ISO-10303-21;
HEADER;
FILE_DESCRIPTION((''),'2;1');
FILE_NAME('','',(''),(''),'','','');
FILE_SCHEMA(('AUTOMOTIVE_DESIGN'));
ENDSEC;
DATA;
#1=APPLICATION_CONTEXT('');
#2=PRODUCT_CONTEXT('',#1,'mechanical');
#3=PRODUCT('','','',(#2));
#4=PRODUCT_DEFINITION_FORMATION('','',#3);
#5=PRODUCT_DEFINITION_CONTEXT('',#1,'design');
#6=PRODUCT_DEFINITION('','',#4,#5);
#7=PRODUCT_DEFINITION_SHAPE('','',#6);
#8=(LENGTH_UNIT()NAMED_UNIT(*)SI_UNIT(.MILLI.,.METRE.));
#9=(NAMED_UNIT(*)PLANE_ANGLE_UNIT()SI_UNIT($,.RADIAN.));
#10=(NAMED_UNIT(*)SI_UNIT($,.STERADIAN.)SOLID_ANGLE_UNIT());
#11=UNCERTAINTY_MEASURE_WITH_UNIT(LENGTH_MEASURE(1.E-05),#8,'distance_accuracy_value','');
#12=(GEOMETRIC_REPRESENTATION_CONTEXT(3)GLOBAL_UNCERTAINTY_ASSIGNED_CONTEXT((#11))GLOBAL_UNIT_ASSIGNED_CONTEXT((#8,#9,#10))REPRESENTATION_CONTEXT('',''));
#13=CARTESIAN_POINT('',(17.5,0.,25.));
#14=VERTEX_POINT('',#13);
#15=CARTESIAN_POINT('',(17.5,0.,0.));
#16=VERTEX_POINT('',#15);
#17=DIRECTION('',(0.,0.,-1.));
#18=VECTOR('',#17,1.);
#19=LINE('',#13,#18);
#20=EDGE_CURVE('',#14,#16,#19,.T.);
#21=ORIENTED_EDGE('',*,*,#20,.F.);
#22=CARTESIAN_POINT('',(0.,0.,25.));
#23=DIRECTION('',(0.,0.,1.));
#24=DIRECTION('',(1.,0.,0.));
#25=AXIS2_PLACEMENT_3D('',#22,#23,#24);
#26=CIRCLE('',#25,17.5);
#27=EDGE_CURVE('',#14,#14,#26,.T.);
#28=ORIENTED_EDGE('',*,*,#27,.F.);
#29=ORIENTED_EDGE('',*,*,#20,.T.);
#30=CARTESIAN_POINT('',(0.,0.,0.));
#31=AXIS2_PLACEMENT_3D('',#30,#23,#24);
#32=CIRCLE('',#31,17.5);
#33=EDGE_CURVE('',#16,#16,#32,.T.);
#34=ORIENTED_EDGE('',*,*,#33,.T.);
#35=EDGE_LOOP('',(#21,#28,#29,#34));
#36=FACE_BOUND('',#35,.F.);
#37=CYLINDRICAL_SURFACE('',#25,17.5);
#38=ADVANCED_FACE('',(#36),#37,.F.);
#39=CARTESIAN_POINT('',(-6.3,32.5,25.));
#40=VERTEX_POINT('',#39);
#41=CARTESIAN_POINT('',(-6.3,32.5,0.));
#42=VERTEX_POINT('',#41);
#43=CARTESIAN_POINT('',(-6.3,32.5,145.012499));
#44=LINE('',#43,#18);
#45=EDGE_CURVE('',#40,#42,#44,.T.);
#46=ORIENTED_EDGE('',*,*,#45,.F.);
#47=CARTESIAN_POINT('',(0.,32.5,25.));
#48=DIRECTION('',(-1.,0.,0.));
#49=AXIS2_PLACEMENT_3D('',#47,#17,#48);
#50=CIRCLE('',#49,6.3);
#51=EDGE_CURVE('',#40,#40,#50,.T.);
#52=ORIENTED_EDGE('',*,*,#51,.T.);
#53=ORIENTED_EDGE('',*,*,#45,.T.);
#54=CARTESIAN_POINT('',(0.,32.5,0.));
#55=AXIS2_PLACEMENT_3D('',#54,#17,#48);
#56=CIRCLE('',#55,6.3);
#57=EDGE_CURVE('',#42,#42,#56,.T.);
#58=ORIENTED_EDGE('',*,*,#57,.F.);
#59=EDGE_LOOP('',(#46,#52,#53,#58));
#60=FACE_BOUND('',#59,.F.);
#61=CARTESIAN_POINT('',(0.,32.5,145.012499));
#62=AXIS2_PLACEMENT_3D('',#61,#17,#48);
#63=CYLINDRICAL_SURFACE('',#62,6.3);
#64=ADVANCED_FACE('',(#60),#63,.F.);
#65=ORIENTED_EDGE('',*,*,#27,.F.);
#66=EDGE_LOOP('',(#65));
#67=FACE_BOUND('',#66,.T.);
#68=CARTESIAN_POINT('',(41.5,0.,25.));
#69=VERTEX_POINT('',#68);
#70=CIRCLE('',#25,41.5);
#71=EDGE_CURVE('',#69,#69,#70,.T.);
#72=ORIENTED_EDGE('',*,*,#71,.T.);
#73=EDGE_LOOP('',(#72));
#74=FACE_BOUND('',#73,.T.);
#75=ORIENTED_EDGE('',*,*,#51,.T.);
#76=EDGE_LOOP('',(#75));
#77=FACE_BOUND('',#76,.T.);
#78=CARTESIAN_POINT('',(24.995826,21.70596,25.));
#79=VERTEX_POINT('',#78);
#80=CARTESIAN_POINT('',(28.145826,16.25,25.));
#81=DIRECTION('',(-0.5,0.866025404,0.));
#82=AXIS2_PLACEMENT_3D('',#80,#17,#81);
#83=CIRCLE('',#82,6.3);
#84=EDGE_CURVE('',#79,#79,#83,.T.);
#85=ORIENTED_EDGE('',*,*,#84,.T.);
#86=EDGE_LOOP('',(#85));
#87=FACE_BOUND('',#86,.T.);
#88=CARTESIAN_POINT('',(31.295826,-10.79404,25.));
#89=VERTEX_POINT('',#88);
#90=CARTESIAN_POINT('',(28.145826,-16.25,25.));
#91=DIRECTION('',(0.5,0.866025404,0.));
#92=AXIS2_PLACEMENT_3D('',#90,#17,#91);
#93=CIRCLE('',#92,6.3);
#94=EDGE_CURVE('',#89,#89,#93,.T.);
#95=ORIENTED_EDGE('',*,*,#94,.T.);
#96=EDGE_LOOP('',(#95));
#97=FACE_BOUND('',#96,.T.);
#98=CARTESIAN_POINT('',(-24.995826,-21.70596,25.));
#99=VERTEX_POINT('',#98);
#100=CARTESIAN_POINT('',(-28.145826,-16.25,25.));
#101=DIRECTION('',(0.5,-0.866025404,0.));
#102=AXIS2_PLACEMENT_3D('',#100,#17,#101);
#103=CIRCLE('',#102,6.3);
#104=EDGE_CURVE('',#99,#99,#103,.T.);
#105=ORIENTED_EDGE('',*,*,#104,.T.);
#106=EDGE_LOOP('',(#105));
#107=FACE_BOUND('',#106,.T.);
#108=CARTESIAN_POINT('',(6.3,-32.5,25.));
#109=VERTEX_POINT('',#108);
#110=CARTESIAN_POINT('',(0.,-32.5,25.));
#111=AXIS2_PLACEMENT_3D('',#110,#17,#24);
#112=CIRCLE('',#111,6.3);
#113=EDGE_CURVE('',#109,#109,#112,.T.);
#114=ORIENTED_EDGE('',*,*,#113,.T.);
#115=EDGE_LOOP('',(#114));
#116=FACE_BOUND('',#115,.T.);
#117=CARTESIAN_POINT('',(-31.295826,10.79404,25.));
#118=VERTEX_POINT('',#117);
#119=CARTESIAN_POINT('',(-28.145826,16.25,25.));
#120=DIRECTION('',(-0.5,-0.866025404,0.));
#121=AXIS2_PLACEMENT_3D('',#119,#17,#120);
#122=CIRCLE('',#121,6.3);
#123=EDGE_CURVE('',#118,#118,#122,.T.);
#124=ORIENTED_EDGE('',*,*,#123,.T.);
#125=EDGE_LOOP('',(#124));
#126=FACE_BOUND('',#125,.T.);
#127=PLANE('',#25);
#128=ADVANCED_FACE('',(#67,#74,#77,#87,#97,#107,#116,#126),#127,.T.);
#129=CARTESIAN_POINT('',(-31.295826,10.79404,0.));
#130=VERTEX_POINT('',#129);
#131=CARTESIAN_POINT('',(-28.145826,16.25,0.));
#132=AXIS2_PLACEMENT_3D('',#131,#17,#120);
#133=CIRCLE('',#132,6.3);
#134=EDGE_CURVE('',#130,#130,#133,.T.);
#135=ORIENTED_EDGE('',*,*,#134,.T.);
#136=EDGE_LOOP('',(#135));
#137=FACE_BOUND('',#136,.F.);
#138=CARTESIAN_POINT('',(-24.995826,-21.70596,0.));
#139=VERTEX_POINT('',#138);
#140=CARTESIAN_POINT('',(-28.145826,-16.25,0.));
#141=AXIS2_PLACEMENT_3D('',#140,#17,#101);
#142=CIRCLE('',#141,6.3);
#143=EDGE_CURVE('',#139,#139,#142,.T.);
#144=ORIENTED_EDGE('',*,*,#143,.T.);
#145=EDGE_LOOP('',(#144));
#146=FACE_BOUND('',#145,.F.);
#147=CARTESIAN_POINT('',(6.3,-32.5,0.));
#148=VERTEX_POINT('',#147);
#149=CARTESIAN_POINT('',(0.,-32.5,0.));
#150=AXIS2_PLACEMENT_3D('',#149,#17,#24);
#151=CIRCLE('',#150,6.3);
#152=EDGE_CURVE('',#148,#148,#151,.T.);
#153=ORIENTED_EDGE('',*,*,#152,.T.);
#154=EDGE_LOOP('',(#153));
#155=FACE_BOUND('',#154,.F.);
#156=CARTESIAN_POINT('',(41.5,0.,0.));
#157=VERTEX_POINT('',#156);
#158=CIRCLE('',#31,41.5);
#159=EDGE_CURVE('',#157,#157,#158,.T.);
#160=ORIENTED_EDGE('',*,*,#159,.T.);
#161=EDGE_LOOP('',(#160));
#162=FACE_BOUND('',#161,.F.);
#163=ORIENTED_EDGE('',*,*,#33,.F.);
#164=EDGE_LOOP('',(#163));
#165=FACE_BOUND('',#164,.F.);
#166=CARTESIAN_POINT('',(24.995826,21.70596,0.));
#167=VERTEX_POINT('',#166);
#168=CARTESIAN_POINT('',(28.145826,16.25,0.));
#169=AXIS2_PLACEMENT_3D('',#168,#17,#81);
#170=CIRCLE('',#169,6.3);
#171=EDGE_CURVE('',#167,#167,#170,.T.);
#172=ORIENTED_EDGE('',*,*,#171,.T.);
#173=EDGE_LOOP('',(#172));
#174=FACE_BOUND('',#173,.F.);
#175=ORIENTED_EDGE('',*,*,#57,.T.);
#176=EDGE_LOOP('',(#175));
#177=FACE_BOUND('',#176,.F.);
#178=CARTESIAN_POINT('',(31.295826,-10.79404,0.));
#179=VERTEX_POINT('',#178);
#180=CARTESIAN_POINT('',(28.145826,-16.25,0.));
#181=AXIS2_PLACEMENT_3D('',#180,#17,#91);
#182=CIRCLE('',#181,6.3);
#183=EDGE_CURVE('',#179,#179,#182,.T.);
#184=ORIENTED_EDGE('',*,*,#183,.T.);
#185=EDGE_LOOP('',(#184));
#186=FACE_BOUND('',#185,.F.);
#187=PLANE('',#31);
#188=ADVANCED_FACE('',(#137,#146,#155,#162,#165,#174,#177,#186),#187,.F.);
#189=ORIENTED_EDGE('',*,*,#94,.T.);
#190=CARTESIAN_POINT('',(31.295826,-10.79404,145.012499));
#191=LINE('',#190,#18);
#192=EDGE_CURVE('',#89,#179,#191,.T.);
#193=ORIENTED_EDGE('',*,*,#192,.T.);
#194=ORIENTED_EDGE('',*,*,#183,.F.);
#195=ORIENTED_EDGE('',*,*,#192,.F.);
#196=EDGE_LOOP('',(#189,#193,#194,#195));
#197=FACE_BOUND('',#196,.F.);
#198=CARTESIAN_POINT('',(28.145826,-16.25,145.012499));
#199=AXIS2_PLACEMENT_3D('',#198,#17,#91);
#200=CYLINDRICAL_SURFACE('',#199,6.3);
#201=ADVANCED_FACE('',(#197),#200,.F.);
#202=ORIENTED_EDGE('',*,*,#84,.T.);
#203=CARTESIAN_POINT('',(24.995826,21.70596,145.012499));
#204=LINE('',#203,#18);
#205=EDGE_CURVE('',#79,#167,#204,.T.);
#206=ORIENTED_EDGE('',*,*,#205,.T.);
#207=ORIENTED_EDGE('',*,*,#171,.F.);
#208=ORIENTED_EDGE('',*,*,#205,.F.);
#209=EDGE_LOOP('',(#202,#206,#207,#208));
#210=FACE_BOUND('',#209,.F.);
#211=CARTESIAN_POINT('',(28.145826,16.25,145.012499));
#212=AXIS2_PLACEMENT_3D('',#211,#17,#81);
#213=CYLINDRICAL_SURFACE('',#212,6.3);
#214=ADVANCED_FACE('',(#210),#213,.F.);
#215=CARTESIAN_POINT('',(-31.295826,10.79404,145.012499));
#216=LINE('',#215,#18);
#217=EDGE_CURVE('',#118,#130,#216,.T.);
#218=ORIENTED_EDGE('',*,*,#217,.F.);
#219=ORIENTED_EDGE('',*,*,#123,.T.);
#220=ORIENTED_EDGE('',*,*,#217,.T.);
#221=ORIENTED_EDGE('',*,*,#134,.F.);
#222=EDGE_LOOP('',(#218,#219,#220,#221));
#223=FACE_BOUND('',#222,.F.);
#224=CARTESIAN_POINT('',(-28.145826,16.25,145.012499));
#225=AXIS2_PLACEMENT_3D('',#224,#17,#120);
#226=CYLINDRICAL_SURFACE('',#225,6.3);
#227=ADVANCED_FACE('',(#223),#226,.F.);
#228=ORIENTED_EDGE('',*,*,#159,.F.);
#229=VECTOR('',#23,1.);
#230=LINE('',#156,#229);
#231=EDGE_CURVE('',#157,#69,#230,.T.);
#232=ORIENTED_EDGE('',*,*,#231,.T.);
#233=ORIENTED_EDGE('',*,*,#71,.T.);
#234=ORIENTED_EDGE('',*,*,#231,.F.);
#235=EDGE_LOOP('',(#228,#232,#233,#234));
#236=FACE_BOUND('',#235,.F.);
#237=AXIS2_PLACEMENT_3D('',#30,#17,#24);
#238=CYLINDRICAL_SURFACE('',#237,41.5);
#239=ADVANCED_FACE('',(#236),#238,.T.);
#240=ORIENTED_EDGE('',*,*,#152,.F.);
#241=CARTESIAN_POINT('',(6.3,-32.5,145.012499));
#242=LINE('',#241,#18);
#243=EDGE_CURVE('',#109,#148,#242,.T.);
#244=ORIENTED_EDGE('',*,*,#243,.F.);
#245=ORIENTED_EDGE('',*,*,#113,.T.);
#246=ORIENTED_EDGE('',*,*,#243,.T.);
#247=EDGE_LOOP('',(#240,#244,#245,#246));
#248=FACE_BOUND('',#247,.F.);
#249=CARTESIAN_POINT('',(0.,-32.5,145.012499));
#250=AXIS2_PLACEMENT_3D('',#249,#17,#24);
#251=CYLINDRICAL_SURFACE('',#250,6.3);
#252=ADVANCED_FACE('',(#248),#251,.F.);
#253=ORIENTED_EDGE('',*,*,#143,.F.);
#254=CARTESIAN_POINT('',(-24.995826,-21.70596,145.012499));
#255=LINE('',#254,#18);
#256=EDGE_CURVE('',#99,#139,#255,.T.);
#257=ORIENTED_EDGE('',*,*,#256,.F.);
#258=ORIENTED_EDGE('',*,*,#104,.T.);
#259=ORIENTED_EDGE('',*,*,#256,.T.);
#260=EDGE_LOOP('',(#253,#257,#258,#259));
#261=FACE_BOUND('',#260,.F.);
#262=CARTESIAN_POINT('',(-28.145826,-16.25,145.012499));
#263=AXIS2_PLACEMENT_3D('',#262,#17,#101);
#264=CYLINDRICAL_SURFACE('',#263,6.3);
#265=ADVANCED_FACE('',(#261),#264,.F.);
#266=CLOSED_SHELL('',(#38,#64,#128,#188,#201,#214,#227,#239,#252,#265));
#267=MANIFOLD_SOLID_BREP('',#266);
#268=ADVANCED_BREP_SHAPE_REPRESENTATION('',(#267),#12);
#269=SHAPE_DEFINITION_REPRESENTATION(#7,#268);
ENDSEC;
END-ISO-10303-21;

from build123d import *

# Parameters (mm, degrees)
F0_R            = 41.5
F1_DEPTH        = 25
F3_D            = 12.6
F3_COPIES_COUNT = 6
F4_R            = 17.5
F5_DEPTH        = 25.001


# Not quite as in the source:
# - a pattern or mirror of a feature is missing from the dataset's text; its kind, count and spacing are read off the source's solid


with BuildPart() as f1:
    # F0 (on Top) → F1 (new body)
    with BuildSketch(Plane.XY):
        Circle(F0_R)
    extrude(amount=F1_DEPTH)

    # F3 (through all)
    with Locations(Plane.XY.offset(25)):
        with Locations((0, 32.5)):
            f3 = Hole(F3_D / 2)

    # F3_copies: F3 ×6 about axis
    f3_copies_axis = Axis((0, 0, 0), (0, 0, 1))
    for i in range(1, F3_COPIES_COUNT):
        add(f3.rotate(f3_copies_axis, i * 360 / F3_COPIES_COUNT), mode=Mode.SUBTRACT)

    # F4 (on face) → F5 (cut, through all)
    with BuildSketch(Plane.XY.offset(25)):
        Circle(F4_R)
    extrude(amount=-F5_DEPTH, mode=Mode.SUBTRACT)


solid = f1.part
